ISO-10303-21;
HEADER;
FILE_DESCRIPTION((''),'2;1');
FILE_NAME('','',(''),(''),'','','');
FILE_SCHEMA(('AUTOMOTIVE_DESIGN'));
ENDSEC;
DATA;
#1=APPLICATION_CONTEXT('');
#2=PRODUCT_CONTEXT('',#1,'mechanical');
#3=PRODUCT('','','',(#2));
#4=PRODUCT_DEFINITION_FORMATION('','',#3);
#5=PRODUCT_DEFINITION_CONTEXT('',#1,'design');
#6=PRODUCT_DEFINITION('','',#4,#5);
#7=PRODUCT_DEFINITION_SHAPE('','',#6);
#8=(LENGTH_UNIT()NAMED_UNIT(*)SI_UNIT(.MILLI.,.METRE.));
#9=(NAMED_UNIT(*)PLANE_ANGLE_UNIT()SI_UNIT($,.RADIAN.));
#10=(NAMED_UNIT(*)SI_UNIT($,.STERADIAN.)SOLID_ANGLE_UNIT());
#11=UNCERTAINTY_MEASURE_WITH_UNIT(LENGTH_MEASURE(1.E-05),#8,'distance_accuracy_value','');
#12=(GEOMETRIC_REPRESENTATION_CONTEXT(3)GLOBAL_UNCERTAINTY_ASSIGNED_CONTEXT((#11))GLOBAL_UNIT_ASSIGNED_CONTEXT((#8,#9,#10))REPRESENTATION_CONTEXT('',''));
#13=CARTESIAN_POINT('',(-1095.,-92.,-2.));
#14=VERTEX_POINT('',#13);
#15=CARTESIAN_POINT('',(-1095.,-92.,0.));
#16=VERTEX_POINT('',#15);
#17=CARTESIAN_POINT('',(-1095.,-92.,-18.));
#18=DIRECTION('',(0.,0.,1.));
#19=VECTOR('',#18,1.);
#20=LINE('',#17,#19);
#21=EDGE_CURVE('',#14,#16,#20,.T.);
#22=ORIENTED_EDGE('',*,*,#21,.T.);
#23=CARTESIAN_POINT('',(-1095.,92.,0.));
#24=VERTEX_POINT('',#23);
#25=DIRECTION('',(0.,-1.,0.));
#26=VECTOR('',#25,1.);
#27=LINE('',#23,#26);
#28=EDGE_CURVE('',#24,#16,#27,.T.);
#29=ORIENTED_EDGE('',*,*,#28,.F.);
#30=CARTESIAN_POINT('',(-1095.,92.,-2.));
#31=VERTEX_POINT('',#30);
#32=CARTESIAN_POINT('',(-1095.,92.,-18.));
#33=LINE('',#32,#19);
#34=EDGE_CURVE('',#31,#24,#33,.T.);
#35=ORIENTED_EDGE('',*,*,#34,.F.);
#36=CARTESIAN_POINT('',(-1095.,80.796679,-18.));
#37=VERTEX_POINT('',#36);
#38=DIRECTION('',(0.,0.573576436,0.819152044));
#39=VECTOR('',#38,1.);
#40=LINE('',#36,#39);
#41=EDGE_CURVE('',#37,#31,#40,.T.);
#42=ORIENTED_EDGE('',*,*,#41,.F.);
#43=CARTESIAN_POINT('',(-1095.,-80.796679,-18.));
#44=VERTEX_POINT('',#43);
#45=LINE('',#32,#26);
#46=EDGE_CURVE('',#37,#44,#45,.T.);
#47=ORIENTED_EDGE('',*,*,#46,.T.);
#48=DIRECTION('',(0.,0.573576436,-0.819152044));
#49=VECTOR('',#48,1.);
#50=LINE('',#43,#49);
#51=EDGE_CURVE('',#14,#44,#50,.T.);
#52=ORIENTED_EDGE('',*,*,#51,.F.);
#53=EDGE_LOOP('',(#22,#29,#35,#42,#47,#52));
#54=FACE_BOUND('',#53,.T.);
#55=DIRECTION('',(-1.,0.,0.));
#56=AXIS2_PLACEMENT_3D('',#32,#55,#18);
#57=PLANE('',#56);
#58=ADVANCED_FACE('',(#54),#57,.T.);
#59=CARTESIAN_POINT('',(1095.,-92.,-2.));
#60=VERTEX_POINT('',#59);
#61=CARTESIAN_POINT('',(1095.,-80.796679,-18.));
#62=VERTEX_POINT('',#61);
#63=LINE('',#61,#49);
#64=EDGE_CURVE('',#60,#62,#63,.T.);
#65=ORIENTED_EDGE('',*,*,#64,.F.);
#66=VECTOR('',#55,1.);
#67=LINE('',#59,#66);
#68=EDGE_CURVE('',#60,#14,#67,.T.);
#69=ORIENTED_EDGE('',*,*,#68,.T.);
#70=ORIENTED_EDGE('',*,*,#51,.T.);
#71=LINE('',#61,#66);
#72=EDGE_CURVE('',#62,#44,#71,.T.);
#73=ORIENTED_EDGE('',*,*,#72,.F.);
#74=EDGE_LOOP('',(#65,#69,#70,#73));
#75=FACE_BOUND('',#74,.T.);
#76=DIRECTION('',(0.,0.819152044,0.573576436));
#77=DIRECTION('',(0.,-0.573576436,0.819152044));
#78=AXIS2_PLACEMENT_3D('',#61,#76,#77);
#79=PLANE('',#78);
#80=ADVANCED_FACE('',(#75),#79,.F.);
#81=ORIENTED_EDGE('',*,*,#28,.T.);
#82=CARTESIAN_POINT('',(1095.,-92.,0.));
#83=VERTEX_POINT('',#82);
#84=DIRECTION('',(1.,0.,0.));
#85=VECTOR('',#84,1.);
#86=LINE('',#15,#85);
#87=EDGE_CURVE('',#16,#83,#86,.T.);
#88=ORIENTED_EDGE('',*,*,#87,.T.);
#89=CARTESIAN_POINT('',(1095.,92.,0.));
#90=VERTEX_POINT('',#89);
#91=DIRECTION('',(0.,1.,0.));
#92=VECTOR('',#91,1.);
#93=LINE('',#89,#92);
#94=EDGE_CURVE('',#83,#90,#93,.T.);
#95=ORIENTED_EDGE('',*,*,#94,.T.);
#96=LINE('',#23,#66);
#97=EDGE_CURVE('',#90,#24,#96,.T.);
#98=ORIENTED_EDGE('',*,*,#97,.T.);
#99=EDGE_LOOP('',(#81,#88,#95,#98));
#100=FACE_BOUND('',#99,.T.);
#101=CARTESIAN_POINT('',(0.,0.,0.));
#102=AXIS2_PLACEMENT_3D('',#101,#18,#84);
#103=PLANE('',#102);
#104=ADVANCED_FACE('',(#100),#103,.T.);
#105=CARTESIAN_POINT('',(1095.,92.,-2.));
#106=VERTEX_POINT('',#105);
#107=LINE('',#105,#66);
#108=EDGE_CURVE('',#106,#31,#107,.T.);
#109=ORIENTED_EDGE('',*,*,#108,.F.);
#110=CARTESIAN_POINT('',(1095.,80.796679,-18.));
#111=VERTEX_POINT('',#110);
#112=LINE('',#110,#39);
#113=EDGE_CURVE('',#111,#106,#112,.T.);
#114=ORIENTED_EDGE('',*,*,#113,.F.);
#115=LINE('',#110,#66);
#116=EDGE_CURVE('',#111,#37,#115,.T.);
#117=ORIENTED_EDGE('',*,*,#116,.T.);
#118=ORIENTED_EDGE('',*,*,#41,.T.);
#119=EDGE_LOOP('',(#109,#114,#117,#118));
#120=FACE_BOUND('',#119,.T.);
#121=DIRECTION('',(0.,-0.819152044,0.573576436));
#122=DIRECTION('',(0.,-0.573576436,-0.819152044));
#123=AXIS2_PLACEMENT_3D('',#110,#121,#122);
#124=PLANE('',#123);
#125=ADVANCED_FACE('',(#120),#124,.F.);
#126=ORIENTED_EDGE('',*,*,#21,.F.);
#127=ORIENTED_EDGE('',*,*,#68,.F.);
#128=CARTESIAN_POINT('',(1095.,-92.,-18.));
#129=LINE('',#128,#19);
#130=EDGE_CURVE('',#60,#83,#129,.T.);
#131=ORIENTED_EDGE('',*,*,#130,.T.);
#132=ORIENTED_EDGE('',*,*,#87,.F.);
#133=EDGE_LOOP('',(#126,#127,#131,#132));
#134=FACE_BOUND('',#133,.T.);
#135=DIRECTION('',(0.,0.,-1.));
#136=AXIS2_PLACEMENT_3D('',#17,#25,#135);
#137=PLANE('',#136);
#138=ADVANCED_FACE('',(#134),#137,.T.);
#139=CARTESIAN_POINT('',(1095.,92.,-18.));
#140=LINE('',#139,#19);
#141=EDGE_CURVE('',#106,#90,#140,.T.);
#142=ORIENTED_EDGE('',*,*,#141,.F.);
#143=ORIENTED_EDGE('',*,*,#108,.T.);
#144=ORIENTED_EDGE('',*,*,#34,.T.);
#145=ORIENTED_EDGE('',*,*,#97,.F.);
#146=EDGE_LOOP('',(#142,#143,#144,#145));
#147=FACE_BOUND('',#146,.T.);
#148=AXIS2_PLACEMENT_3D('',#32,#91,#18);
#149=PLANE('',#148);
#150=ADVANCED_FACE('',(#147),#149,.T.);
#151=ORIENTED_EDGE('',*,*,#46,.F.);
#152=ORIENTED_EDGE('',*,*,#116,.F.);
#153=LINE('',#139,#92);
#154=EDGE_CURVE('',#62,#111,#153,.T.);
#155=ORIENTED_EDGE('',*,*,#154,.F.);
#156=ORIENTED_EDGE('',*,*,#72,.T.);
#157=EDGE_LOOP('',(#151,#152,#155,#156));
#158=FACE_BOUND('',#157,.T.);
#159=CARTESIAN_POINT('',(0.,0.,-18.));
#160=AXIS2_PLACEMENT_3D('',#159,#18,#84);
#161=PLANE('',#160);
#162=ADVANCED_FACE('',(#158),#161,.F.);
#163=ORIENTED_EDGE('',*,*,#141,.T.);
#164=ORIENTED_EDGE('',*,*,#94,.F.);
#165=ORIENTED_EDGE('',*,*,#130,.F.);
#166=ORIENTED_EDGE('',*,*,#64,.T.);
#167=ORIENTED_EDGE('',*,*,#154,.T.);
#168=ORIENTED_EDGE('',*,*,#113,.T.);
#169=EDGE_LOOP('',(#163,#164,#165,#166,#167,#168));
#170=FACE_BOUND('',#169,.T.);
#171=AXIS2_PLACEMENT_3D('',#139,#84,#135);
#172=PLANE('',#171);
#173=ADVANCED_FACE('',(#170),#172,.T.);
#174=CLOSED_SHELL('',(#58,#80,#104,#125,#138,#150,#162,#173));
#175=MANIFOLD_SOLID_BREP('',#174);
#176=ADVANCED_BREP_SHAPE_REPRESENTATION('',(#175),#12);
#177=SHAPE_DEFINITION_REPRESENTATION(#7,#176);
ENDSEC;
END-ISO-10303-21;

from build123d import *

# Parameters (mm, degrees)
SKETCH_1_W             = 2190
SKETCH_1_H             = 184
SM_BASE_FLANGE_1_DEPTH = 18
CUT_EXTRUDE_1_DEPTH    = 2193.005474446


# Sheet-metal steps are written as plain solids
with BuildPart() as part:
    # Sketch 1 → 基体-法兰1 (new body)
    with BuildSketch(Plane.XY):
        Rectangle(SKETCH_1_W, SKETCH_1_H)
    extrude(amount=-SM_BASE_FLANGE_1_DEPTH)

    # 草图6 → 切除-拉伸1 (cut, through all)
    with BuildSketch(Plane.ZY.offset(1095)):
        Polygon((-18, 92), (-18, 80.796679389), (-2, 92), align=None)
        Polygon((-18, -92), (-18, -80.796679389), (-2, -92), align=None)
    extrude(amount=-CUT_EXTRUDE_1_DEPTH, mode=Mode.SUBTRACT)


solid = part.part
